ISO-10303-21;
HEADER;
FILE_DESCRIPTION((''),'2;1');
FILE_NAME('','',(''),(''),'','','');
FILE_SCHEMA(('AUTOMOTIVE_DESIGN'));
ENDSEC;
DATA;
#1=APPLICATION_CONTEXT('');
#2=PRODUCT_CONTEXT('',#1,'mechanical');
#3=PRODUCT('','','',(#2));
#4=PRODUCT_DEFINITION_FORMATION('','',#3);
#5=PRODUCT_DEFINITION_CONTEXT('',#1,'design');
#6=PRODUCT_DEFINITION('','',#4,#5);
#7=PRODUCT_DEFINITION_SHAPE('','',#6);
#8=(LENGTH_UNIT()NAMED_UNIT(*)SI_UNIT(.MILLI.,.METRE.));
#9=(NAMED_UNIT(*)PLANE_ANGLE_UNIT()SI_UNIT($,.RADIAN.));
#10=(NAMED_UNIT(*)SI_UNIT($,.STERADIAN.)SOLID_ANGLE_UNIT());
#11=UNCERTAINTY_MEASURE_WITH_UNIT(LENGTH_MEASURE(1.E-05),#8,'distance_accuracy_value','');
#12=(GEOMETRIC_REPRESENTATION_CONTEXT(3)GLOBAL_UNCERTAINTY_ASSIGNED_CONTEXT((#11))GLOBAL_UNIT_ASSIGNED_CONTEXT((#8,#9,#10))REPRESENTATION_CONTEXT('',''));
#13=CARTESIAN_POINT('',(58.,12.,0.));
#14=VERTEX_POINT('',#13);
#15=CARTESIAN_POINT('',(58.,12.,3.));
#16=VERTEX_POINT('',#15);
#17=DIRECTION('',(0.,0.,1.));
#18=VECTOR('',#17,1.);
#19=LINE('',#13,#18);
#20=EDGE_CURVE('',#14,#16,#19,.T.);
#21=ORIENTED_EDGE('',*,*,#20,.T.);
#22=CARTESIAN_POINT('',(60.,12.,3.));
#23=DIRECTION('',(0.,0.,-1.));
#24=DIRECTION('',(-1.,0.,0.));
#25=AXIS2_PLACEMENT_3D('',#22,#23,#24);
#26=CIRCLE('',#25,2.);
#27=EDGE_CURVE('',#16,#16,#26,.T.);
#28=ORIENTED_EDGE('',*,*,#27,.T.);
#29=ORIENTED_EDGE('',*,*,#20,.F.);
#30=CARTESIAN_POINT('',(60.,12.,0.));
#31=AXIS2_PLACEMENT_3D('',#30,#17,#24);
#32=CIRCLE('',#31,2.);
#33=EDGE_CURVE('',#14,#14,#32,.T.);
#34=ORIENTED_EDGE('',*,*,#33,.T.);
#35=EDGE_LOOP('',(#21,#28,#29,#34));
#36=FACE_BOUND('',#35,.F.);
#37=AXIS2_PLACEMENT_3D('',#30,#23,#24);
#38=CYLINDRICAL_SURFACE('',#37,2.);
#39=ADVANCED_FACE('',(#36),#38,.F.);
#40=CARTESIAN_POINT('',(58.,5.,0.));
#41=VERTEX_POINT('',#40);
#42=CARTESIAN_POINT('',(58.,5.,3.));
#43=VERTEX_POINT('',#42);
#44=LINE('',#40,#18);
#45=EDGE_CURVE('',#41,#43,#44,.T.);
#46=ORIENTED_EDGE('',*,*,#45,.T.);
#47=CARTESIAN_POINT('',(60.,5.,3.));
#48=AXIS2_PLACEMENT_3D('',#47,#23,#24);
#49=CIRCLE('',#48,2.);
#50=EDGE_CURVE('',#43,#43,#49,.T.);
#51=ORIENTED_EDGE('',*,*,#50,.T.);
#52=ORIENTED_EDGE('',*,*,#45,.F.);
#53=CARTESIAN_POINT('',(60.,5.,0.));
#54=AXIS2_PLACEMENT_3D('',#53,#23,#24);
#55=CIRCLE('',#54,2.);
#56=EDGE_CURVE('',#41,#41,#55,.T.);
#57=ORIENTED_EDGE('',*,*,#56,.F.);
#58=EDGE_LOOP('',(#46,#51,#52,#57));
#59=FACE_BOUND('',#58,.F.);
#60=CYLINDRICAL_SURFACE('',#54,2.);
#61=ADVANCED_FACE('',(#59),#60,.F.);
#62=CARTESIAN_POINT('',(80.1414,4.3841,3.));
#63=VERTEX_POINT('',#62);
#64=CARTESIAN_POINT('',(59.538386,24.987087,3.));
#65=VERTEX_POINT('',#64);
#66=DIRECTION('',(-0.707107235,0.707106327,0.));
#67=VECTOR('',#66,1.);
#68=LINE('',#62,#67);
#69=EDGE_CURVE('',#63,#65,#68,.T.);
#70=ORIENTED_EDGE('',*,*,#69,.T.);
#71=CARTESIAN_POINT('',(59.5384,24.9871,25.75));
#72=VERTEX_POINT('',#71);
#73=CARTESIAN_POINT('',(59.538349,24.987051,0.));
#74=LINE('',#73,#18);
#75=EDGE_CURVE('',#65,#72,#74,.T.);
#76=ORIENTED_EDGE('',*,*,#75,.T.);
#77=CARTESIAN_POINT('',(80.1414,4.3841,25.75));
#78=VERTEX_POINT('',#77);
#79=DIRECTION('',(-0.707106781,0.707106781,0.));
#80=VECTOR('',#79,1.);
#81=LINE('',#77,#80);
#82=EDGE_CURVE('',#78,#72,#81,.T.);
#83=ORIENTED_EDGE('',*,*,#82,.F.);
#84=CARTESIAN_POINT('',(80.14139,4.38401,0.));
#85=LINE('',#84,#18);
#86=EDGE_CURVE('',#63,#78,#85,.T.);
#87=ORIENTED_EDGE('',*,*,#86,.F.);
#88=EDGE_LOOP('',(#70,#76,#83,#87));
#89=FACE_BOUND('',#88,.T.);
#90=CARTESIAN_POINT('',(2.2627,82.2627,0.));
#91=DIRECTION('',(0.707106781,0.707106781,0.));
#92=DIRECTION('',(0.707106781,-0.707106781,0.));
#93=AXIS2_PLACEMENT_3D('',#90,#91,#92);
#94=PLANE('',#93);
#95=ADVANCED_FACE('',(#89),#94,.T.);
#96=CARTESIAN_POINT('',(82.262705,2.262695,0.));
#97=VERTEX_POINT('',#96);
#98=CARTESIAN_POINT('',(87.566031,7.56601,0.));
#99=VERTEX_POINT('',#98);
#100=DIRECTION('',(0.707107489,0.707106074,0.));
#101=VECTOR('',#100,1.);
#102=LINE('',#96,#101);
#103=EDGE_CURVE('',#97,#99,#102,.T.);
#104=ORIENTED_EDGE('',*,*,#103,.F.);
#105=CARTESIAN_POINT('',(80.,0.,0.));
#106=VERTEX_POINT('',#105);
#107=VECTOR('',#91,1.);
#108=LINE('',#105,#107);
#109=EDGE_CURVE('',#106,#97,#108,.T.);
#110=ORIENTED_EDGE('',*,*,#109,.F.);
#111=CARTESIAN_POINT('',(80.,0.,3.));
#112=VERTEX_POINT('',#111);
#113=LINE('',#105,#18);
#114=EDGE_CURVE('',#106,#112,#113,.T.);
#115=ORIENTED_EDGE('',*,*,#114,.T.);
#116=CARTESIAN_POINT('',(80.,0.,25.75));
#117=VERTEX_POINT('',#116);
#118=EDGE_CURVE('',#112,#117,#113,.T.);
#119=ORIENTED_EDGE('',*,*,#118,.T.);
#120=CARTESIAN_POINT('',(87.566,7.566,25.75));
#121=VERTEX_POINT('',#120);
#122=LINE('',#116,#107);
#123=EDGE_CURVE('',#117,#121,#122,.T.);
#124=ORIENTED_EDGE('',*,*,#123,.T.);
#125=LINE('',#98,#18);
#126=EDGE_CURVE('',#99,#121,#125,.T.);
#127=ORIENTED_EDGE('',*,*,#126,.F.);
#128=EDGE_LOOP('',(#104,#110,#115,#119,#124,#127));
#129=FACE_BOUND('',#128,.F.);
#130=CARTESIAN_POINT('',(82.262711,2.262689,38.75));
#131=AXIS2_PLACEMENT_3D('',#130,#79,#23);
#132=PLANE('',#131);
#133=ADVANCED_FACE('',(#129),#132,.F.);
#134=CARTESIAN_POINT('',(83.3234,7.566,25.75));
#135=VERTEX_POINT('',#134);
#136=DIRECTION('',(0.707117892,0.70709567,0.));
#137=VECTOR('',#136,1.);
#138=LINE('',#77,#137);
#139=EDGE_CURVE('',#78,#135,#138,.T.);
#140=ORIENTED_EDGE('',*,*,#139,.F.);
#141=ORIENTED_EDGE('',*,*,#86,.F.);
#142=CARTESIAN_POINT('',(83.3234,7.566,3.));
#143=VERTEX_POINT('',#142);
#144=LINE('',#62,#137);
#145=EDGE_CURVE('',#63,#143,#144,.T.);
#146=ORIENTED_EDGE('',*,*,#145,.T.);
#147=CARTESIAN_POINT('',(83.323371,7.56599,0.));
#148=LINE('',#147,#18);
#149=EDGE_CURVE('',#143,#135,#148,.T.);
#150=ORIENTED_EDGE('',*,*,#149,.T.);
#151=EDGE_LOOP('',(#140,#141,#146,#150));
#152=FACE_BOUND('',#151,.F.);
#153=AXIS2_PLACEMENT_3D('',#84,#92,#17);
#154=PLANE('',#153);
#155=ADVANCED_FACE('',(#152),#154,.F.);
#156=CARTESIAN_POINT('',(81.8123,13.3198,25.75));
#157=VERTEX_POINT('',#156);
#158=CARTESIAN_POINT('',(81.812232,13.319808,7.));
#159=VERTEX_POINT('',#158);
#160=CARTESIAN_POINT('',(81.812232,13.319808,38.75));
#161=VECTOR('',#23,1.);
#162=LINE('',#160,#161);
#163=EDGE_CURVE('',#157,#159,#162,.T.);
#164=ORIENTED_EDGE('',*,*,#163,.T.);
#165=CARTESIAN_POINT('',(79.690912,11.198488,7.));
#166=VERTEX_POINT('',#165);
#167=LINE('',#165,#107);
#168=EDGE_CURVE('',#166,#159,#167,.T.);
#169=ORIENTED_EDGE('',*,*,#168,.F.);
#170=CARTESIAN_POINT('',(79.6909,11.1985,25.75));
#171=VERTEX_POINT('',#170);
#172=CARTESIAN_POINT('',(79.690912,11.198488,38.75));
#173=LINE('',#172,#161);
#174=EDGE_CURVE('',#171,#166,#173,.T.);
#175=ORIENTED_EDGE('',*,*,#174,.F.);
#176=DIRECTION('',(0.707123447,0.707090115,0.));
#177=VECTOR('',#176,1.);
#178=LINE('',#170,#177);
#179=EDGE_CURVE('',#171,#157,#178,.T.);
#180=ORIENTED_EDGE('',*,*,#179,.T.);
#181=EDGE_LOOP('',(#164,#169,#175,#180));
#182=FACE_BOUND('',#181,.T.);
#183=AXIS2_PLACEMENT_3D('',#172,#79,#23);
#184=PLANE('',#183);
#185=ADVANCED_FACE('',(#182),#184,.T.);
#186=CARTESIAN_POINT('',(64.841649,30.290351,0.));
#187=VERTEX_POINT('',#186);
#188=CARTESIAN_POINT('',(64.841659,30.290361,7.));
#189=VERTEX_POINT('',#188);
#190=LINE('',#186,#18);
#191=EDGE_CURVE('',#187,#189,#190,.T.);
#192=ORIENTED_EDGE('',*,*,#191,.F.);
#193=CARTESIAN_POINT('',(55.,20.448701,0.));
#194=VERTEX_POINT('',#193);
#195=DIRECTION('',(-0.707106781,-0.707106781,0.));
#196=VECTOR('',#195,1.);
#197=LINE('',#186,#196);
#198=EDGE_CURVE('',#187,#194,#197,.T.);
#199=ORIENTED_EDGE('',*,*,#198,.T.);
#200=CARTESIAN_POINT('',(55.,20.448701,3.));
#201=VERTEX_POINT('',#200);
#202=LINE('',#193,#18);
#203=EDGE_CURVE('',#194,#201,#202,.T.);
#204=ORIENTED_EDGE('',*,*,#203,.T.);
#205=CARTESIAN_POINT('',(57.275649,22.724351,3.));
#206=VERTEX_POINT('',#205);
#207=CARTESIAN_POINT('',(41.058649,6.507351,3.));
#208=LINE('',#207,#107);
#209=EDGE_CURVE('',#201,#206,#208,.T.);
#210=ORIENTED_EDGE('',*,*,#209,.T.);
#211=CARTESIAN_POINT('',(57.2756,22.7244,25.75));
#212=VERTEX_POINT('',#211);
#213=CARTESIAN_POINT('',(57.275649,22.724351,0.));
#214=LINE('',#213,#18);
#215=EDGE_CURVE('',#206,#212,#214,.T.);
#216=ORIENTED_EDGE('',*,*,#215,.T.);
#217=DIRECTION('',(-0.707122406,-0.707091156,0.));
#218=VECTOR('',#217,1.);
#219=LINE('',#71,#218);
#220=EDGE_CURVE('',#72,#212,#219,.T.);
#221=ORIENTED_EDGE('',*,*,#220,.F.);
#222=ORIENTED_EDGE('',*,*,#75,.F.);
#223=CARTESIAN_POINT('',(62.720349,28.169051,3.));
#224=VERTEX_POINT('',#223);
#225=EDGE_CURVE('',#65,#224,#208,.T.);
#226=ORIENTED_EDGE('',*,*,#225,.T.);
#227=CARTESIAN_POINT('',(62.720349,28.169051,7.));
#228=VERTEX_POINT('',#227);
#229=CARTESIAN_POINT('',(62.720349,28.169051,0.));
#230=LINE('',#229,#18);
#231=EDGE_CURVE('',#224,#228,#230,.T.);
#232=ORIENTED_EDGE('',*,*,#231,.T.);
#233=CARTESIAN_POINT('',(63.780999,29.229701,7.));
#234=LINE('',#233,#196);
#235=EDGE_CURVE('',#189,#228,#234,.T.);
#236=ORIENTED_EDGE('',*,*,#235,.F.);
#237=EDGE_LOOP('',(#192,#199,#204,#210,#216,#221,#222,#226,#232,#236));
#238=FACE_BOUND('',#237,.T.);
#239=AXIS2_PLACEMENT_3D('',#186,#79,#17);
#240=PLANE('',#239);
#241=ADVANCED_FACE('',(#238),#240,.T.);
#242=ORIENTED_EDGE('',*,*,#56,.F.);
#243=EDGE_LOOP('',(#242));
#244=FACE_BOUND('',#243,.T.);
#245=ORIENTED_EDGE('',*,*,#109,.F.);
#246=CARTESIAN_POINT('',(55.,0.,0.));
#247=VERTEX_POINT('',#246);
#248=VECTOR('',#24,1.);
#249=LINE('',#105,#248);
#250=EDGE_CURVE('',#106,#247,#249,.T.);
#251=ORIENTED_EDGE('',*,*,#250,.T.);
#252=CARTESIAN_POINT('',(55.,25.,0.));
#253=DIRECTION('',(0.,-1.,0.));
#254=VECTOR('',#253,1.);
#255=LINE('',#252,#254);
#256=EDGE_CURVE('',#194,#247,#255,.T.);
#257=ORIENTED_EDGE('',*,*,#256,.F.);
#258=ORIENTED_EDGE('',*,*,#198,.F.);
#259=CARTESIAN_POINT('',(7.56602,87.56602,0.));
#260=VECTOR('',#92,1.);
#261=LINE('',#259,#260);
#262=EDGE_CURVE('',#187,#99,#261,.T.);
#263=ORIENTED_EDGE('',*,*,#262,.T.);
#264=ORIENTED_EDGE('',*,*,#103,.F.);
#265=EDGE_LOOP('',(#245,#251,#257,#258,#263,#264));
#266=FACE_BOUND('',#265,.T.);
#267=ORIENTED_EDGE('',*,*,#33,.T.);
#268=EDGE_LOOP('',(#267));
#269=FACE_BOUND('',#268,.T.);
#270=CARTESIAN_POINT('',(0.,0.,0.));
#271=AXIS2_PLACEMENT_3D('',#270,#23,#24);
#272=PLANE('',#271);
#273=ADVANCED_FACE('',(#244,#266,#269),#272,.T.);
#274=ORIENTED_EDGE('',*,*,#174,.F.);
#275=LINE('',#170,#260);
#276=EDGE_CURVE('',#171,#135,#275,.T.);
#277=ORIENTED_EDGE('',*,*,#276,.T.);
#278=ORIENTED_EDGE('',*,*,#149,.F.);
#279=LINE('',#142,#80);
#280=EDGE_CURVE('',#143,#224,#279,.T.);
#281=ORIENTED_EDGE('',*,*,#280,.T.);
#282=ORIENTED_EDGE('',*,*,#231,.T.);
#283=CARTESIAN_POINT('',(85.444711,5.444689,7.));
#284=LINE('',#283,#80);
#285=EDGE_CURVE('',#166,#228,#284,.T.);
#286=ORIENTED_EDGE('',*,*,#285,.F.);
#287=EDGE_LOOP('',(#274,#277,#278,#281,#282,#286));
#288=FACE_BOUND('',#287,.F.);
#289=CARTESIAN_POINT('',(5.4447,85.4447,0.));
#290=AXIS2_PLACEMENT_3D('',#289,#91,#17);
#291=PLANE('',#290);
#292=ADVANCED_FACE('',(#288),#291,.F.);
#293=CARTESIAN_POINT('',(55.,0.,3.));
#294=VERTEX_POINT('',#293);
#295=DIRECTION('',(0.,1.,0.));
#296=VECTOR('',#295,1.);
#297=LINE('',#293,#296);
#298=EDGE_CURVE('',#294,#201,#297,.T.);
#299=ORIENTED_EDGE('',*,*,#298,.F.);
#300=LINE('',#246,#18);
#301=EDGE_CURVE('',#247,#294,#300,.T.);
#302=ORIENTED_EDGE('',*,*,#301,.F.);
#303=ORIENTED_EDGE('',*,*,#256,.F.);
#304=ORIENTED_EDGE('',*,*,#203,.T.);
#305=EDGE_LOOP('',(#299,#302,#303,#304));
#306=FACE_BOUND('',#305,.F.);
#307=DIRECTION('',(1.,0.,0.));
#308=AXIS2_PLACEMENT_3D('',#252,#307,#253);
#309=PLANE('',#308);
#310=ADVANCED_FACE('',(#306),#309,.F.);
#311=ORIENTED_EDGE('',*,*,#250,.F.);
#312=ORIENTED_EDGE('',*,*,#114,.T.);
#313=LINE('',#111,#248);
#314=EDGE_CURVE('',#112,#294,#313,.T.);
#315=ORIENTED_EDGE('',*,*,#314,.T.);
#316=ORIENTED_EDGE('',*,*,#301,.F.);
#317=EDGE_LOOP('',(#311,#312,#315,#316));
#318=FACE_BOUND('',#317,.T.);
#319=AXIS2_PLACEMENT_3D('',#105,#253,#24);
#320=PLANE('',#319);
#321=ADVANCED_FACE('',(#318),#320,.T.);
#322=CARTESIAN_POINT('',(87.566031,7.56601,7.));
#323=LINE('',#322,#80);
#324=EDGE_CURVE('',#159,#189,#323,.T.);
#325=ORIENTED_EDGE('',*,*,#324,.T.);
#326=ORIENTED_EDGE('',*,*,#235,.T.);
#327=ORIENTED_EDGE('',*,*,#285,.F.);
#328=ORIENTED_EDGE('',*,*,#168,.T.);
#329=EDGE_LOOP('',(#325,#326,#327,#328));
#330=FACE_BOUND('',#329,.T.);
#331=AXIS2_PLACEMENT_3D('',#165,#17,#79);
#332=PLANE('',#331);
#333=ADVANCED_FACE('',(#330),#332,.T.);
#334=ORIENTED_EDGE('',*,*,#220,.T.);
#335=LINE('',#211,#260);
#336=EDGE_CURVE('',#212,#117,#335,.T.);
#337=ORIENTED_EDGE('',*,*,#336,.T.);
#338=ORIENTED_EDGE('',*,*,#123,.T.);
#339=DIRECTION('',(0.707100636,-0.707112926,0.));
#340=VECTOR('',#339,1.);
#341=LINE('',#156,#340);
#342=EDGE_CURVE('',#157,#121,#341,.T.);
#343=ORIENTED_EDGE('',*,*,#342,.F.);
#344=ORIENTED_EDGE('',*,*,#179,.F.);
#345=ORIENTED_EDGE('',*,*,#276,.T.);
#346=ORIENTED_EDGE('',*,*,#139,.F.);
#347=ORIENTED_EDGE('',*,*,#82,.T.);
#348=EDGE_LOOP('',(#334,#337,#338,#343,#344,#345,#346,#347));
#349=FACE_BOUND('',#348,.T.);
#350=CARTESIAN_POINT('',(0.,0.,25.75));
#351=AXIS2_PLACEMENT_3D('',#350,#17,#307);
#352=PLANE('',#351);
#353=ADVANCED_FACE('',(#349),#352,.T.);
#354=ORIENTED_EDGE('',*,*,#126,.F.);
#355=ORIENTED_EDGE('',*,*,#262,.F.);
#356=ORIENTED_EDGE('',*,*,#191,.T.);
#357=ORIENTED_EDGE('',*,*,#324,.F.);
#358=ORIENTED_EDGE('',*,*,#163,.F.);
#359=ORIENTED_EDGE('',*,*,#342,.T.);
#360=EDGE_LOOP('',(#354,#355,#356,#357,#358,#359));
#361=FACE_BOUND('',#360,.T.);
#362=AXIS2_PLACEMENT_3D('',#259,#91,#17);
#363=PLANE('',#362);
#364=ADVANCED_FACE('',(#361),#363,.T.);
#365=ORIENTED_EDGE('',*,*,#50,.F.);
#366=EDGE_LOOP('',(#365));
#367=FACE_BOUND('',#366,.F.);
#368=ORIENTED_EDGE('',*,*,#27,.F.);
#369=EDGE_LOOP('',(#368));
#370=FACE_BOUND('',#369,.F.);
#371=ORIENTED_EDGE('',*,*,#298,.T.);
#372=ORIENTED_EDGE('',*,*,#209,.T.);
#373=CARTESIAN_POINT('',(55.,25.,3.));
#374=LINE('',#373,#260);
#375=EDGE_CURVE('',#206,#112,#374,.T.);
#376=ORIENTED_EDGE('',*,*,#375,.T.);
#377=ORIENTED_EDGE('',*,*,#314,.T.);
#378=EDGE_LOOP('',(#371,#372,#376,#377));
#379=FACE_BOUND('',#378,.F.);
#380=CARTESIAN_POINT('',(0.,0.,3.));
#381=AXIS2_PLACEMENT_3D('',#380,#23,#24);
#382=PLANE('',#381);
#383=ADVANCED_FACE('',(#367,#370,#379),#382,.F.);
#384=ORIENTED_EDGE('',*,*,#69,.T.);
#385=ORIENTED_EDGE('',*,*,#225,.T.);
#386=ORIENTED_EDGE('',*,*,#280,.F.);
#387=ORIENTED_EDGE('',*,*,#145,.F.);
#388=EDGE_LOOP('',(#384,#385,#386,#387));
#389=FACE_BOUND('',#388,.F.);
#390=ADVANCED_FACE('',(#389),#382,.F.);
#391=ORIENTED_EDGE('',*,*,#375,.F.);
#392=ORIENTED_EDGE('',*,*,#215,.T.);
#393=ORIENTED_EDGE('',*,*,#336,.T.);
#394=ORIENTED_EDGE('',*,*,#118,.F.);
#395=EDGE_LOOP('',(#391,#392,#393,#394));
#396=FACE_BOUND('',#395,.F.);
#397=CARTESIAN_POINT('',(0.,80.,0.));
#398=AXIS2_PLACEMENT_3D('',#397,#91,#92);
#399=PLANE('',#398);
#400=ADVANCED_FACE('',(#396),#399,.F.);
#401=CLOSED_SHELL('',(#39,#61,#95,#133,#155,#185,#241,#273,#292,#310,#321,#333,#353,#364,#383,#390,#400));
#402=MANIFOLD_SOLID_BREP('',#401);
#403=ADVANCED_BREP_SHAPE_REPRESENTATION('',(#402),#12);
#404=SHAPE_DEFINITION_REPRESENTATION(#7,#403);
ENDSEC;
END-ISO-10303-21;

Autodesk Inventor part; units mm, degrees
ref_plane "YZ Plane" through (0, 0, 0) normal (1, 0, 0) x (0, 1, 0)
ref_plane "XZ Plane" through (0, 0, 0) normal (0, 1, 0) x (-1, 0, 0)
ref_plane "XY Plane" through (0, 0, 0) normal (0, 0, 1) x (1, 0, 0)
sketch "Эскиз1" plane through (0, 0, 0) normal (0, 0, 1) x (1, 0, 0)
  line L0 (0, 80) -> (80, 0)
  line L1 (2.2627, 82.2627) -> (82.2627, 2.2627)
  line L2 (0, 80) -> (2.2627, 82.2627)
  line L3 (80, 0) -> (82.2627, 2.2627)
  point P0 (0, 0)
  dimension "d2" = 3.2
extrude "Выдавливание1" add sketch "Эскиз1" along normal blind 38.75
sketch "Эскиз2" plane through (0, 0, 0) normal (0, 0, -1) x (-1, 0, 0)
  line L0 (0, 80) -> (-80, 0) projected
  line L1 (-55, 25) -> (-55, -25)
  line L2 (-80, 0) -> (-55, 0)
  line L3 (-55, 8) -> (-60, 8)
  line L4 (-60, 8) -> (-60, 33)
  circle A0 centre (-60, 12) radius 2
  circle A1 centre (-60, 5) radius 2
  point P0 (0, 0)
  dimension "d5" = 4
extrude "Выдавливание2" add sketch "Эскиз2" against normal blind 3 contours L1 L3 L4 A0 L0 | L4 A0 L3 L1 L2 L0
sketch "Эскиз3" plane through (2.2627, 82.2627, 0) normal (0.7071068, 0.7071068, 0) x (-0.7071068, 0.7071068, 0)
  line L0 (-113.1371, 0) -> (-95.4594, 0) projected
  line L1 (0, 38.75) -> (-113.1371, 38.75) projected
  line L2 (-113.1371, 0) -> (-110.1371, 0)
  line L3 (-110.1371, 0) -> (-110.1371, 38.75)
  line L4 (-110.1371, 38.75) -> (-113.1371, 38.75)
  line L5 (-113.1371, 38.75) -> (-113.1371, 0)
  point P0 (-56.5685, 0)
  point P1 (-113.1371, 38.75)
  dimension "d8" = 3
extrude "Выдавливание3" add sketch "Эскиз3" along normal blind 4.5
sketch "Эскиз4" plane through (5.4447, 85.4447, 0) normal (0.7071068, 0.7071068, 0) x (0, 0, 1)
  line L0 (0, 113.1371) -> (3, 113.1371) projected
  line L1 (0, 0) -> (38.75, 0) projected
  line L2 (0, 113.1371) -> (7, 113.1371)
  line L3 (7, 113.1371) -> (7, 0)
  line L4 (7, 0) -> (0, 0)
  line L5 (0, 0) -> (0, 113.1371)
  line L6 (38.75, 0) -> (38.75, 113.1371) projected
  line L7 (7, 113.1371) -> (38.75, 113.1371)
  line L8 (38.75, 113.1371) -> (38.75, 105)
  line L9 (38.75, 105) -> (7, 105)
  line L10 (7, 105) -> (7, 113.1371)
  point P0 (0, 56.5685)
  point P1 (38.75, 113.1371)
  point P2 (7, 105)
extrude "Выдавливание4" add sketch "Эскиз4" along normal blind 3 contours L0 L2 L3 L1 L5 | L7 L6 L9 L3
sketch "Эскиз5" plane through (0, 0, 0) normal (0, 0, -1) x (-1, 0, 0)
  line L0 (-80.1414, 4.3841) -> (-2.2627, 82.2627) projected
  circle A0 centre (-60, 12) radius 2 projected
  circle A1 centre (-60, 5) radius 2 projected
  line L1 (0, 80) -> (-55, 25) projected
  line L2 (-2.2627, 82.2627) -> (0, 80) projected
  line L3 (-80.1414, 4.3841) -> (-2.2627, 82.2627) projected
  line L4 (-80.1414, 4.3841) -> (-83.3234, 7.566) projected
  line L5 (-83.3234, 7.566) -> (-5.4447, 85.4447) projected
  line L6 (-5.4447, 85.4447) -> (-7.566, 87.566) projected
  line L7 (-87.566, 7.566) -> (-7.566, 87.566) projected
  line L8 (-80, 0) -> (-87.566, 7.566) projected
  line L9 (-80, 0) -> (-55, 0) projected
  line L10 (-55, 0) -> (-55, 25) projected
  line L11 (-5.4447, 85.4447) -> (-2.2627, 82.2627)
  line L12 (-83.3234, 7.566) -> (-5.4447, 85.4447) projected
  point P0 (0, 0)
  point P1 (-2.2627, 82.2627)
extrude "Выдавливание5" add sketch "Эскиз5" against normal blind 3 contours L4 L5 L11 L0
sketch "Эскиз6" plane through (7.566, 87.566, 0) normal (0.7071068, 0.7071068, 0) x (-0.7071068, 0.7071068, 0)
  line L0 (0, 0) -> (-77.7817, 0) projected
  line L1 (-110.1371, 38.75) -> (0, 38.75) projected
  line L2 (0, 0) -> (-70, 0)
  line L3 (-70, 0) -> (-70, 38.75)
  line L4 (-70, 38.75) -> (0, 38.75)
  line L5 (0, 38.75) -> (0, 0)
  line L6 (-81, 0) -> (-81, 51)
  line L7 (-113.1371, 0) -> (0, 0) projected
  point P0 (-56.5685, 0)
  point P1 (0, 38.75)
  point P2 (-81, 38.75)
extrude "Выдавливание6" cut sketch "Эскиз6" against normal through all
sketch "Эскиз7" plane through (0, 0, 38.75) normal (0, 0, 1) x (1, 0, 0)
  line L0 (59.5384, 24.9871) -> (57.2756, 22.7244) projected
  line L1 (57.2756, 22.7244) -> (80, 0) projected
  line L2 (80, 0) -> (87.566, 7.566) projected
  line L3 (81.8123, 13.3198) -> (87.566, 7.566) projected
  line L4 (79.6909, 11.1985) -> (81.8123, 13.3198) projected
  line L5 (79.6909, 11.1985) -> (83.3234, 7.566) projected
  line L6 (80.1414, 4.3841) -> (83.3234, 7.566) projected
  line L7 (80.1414, 4.3841) -> (59.5384, 24.9871) projected
  point P0 (0, 0)
extrude "Выдавливание7" cut sketch "Эскиз7" against normal blind 13
properties part number "фанера"
